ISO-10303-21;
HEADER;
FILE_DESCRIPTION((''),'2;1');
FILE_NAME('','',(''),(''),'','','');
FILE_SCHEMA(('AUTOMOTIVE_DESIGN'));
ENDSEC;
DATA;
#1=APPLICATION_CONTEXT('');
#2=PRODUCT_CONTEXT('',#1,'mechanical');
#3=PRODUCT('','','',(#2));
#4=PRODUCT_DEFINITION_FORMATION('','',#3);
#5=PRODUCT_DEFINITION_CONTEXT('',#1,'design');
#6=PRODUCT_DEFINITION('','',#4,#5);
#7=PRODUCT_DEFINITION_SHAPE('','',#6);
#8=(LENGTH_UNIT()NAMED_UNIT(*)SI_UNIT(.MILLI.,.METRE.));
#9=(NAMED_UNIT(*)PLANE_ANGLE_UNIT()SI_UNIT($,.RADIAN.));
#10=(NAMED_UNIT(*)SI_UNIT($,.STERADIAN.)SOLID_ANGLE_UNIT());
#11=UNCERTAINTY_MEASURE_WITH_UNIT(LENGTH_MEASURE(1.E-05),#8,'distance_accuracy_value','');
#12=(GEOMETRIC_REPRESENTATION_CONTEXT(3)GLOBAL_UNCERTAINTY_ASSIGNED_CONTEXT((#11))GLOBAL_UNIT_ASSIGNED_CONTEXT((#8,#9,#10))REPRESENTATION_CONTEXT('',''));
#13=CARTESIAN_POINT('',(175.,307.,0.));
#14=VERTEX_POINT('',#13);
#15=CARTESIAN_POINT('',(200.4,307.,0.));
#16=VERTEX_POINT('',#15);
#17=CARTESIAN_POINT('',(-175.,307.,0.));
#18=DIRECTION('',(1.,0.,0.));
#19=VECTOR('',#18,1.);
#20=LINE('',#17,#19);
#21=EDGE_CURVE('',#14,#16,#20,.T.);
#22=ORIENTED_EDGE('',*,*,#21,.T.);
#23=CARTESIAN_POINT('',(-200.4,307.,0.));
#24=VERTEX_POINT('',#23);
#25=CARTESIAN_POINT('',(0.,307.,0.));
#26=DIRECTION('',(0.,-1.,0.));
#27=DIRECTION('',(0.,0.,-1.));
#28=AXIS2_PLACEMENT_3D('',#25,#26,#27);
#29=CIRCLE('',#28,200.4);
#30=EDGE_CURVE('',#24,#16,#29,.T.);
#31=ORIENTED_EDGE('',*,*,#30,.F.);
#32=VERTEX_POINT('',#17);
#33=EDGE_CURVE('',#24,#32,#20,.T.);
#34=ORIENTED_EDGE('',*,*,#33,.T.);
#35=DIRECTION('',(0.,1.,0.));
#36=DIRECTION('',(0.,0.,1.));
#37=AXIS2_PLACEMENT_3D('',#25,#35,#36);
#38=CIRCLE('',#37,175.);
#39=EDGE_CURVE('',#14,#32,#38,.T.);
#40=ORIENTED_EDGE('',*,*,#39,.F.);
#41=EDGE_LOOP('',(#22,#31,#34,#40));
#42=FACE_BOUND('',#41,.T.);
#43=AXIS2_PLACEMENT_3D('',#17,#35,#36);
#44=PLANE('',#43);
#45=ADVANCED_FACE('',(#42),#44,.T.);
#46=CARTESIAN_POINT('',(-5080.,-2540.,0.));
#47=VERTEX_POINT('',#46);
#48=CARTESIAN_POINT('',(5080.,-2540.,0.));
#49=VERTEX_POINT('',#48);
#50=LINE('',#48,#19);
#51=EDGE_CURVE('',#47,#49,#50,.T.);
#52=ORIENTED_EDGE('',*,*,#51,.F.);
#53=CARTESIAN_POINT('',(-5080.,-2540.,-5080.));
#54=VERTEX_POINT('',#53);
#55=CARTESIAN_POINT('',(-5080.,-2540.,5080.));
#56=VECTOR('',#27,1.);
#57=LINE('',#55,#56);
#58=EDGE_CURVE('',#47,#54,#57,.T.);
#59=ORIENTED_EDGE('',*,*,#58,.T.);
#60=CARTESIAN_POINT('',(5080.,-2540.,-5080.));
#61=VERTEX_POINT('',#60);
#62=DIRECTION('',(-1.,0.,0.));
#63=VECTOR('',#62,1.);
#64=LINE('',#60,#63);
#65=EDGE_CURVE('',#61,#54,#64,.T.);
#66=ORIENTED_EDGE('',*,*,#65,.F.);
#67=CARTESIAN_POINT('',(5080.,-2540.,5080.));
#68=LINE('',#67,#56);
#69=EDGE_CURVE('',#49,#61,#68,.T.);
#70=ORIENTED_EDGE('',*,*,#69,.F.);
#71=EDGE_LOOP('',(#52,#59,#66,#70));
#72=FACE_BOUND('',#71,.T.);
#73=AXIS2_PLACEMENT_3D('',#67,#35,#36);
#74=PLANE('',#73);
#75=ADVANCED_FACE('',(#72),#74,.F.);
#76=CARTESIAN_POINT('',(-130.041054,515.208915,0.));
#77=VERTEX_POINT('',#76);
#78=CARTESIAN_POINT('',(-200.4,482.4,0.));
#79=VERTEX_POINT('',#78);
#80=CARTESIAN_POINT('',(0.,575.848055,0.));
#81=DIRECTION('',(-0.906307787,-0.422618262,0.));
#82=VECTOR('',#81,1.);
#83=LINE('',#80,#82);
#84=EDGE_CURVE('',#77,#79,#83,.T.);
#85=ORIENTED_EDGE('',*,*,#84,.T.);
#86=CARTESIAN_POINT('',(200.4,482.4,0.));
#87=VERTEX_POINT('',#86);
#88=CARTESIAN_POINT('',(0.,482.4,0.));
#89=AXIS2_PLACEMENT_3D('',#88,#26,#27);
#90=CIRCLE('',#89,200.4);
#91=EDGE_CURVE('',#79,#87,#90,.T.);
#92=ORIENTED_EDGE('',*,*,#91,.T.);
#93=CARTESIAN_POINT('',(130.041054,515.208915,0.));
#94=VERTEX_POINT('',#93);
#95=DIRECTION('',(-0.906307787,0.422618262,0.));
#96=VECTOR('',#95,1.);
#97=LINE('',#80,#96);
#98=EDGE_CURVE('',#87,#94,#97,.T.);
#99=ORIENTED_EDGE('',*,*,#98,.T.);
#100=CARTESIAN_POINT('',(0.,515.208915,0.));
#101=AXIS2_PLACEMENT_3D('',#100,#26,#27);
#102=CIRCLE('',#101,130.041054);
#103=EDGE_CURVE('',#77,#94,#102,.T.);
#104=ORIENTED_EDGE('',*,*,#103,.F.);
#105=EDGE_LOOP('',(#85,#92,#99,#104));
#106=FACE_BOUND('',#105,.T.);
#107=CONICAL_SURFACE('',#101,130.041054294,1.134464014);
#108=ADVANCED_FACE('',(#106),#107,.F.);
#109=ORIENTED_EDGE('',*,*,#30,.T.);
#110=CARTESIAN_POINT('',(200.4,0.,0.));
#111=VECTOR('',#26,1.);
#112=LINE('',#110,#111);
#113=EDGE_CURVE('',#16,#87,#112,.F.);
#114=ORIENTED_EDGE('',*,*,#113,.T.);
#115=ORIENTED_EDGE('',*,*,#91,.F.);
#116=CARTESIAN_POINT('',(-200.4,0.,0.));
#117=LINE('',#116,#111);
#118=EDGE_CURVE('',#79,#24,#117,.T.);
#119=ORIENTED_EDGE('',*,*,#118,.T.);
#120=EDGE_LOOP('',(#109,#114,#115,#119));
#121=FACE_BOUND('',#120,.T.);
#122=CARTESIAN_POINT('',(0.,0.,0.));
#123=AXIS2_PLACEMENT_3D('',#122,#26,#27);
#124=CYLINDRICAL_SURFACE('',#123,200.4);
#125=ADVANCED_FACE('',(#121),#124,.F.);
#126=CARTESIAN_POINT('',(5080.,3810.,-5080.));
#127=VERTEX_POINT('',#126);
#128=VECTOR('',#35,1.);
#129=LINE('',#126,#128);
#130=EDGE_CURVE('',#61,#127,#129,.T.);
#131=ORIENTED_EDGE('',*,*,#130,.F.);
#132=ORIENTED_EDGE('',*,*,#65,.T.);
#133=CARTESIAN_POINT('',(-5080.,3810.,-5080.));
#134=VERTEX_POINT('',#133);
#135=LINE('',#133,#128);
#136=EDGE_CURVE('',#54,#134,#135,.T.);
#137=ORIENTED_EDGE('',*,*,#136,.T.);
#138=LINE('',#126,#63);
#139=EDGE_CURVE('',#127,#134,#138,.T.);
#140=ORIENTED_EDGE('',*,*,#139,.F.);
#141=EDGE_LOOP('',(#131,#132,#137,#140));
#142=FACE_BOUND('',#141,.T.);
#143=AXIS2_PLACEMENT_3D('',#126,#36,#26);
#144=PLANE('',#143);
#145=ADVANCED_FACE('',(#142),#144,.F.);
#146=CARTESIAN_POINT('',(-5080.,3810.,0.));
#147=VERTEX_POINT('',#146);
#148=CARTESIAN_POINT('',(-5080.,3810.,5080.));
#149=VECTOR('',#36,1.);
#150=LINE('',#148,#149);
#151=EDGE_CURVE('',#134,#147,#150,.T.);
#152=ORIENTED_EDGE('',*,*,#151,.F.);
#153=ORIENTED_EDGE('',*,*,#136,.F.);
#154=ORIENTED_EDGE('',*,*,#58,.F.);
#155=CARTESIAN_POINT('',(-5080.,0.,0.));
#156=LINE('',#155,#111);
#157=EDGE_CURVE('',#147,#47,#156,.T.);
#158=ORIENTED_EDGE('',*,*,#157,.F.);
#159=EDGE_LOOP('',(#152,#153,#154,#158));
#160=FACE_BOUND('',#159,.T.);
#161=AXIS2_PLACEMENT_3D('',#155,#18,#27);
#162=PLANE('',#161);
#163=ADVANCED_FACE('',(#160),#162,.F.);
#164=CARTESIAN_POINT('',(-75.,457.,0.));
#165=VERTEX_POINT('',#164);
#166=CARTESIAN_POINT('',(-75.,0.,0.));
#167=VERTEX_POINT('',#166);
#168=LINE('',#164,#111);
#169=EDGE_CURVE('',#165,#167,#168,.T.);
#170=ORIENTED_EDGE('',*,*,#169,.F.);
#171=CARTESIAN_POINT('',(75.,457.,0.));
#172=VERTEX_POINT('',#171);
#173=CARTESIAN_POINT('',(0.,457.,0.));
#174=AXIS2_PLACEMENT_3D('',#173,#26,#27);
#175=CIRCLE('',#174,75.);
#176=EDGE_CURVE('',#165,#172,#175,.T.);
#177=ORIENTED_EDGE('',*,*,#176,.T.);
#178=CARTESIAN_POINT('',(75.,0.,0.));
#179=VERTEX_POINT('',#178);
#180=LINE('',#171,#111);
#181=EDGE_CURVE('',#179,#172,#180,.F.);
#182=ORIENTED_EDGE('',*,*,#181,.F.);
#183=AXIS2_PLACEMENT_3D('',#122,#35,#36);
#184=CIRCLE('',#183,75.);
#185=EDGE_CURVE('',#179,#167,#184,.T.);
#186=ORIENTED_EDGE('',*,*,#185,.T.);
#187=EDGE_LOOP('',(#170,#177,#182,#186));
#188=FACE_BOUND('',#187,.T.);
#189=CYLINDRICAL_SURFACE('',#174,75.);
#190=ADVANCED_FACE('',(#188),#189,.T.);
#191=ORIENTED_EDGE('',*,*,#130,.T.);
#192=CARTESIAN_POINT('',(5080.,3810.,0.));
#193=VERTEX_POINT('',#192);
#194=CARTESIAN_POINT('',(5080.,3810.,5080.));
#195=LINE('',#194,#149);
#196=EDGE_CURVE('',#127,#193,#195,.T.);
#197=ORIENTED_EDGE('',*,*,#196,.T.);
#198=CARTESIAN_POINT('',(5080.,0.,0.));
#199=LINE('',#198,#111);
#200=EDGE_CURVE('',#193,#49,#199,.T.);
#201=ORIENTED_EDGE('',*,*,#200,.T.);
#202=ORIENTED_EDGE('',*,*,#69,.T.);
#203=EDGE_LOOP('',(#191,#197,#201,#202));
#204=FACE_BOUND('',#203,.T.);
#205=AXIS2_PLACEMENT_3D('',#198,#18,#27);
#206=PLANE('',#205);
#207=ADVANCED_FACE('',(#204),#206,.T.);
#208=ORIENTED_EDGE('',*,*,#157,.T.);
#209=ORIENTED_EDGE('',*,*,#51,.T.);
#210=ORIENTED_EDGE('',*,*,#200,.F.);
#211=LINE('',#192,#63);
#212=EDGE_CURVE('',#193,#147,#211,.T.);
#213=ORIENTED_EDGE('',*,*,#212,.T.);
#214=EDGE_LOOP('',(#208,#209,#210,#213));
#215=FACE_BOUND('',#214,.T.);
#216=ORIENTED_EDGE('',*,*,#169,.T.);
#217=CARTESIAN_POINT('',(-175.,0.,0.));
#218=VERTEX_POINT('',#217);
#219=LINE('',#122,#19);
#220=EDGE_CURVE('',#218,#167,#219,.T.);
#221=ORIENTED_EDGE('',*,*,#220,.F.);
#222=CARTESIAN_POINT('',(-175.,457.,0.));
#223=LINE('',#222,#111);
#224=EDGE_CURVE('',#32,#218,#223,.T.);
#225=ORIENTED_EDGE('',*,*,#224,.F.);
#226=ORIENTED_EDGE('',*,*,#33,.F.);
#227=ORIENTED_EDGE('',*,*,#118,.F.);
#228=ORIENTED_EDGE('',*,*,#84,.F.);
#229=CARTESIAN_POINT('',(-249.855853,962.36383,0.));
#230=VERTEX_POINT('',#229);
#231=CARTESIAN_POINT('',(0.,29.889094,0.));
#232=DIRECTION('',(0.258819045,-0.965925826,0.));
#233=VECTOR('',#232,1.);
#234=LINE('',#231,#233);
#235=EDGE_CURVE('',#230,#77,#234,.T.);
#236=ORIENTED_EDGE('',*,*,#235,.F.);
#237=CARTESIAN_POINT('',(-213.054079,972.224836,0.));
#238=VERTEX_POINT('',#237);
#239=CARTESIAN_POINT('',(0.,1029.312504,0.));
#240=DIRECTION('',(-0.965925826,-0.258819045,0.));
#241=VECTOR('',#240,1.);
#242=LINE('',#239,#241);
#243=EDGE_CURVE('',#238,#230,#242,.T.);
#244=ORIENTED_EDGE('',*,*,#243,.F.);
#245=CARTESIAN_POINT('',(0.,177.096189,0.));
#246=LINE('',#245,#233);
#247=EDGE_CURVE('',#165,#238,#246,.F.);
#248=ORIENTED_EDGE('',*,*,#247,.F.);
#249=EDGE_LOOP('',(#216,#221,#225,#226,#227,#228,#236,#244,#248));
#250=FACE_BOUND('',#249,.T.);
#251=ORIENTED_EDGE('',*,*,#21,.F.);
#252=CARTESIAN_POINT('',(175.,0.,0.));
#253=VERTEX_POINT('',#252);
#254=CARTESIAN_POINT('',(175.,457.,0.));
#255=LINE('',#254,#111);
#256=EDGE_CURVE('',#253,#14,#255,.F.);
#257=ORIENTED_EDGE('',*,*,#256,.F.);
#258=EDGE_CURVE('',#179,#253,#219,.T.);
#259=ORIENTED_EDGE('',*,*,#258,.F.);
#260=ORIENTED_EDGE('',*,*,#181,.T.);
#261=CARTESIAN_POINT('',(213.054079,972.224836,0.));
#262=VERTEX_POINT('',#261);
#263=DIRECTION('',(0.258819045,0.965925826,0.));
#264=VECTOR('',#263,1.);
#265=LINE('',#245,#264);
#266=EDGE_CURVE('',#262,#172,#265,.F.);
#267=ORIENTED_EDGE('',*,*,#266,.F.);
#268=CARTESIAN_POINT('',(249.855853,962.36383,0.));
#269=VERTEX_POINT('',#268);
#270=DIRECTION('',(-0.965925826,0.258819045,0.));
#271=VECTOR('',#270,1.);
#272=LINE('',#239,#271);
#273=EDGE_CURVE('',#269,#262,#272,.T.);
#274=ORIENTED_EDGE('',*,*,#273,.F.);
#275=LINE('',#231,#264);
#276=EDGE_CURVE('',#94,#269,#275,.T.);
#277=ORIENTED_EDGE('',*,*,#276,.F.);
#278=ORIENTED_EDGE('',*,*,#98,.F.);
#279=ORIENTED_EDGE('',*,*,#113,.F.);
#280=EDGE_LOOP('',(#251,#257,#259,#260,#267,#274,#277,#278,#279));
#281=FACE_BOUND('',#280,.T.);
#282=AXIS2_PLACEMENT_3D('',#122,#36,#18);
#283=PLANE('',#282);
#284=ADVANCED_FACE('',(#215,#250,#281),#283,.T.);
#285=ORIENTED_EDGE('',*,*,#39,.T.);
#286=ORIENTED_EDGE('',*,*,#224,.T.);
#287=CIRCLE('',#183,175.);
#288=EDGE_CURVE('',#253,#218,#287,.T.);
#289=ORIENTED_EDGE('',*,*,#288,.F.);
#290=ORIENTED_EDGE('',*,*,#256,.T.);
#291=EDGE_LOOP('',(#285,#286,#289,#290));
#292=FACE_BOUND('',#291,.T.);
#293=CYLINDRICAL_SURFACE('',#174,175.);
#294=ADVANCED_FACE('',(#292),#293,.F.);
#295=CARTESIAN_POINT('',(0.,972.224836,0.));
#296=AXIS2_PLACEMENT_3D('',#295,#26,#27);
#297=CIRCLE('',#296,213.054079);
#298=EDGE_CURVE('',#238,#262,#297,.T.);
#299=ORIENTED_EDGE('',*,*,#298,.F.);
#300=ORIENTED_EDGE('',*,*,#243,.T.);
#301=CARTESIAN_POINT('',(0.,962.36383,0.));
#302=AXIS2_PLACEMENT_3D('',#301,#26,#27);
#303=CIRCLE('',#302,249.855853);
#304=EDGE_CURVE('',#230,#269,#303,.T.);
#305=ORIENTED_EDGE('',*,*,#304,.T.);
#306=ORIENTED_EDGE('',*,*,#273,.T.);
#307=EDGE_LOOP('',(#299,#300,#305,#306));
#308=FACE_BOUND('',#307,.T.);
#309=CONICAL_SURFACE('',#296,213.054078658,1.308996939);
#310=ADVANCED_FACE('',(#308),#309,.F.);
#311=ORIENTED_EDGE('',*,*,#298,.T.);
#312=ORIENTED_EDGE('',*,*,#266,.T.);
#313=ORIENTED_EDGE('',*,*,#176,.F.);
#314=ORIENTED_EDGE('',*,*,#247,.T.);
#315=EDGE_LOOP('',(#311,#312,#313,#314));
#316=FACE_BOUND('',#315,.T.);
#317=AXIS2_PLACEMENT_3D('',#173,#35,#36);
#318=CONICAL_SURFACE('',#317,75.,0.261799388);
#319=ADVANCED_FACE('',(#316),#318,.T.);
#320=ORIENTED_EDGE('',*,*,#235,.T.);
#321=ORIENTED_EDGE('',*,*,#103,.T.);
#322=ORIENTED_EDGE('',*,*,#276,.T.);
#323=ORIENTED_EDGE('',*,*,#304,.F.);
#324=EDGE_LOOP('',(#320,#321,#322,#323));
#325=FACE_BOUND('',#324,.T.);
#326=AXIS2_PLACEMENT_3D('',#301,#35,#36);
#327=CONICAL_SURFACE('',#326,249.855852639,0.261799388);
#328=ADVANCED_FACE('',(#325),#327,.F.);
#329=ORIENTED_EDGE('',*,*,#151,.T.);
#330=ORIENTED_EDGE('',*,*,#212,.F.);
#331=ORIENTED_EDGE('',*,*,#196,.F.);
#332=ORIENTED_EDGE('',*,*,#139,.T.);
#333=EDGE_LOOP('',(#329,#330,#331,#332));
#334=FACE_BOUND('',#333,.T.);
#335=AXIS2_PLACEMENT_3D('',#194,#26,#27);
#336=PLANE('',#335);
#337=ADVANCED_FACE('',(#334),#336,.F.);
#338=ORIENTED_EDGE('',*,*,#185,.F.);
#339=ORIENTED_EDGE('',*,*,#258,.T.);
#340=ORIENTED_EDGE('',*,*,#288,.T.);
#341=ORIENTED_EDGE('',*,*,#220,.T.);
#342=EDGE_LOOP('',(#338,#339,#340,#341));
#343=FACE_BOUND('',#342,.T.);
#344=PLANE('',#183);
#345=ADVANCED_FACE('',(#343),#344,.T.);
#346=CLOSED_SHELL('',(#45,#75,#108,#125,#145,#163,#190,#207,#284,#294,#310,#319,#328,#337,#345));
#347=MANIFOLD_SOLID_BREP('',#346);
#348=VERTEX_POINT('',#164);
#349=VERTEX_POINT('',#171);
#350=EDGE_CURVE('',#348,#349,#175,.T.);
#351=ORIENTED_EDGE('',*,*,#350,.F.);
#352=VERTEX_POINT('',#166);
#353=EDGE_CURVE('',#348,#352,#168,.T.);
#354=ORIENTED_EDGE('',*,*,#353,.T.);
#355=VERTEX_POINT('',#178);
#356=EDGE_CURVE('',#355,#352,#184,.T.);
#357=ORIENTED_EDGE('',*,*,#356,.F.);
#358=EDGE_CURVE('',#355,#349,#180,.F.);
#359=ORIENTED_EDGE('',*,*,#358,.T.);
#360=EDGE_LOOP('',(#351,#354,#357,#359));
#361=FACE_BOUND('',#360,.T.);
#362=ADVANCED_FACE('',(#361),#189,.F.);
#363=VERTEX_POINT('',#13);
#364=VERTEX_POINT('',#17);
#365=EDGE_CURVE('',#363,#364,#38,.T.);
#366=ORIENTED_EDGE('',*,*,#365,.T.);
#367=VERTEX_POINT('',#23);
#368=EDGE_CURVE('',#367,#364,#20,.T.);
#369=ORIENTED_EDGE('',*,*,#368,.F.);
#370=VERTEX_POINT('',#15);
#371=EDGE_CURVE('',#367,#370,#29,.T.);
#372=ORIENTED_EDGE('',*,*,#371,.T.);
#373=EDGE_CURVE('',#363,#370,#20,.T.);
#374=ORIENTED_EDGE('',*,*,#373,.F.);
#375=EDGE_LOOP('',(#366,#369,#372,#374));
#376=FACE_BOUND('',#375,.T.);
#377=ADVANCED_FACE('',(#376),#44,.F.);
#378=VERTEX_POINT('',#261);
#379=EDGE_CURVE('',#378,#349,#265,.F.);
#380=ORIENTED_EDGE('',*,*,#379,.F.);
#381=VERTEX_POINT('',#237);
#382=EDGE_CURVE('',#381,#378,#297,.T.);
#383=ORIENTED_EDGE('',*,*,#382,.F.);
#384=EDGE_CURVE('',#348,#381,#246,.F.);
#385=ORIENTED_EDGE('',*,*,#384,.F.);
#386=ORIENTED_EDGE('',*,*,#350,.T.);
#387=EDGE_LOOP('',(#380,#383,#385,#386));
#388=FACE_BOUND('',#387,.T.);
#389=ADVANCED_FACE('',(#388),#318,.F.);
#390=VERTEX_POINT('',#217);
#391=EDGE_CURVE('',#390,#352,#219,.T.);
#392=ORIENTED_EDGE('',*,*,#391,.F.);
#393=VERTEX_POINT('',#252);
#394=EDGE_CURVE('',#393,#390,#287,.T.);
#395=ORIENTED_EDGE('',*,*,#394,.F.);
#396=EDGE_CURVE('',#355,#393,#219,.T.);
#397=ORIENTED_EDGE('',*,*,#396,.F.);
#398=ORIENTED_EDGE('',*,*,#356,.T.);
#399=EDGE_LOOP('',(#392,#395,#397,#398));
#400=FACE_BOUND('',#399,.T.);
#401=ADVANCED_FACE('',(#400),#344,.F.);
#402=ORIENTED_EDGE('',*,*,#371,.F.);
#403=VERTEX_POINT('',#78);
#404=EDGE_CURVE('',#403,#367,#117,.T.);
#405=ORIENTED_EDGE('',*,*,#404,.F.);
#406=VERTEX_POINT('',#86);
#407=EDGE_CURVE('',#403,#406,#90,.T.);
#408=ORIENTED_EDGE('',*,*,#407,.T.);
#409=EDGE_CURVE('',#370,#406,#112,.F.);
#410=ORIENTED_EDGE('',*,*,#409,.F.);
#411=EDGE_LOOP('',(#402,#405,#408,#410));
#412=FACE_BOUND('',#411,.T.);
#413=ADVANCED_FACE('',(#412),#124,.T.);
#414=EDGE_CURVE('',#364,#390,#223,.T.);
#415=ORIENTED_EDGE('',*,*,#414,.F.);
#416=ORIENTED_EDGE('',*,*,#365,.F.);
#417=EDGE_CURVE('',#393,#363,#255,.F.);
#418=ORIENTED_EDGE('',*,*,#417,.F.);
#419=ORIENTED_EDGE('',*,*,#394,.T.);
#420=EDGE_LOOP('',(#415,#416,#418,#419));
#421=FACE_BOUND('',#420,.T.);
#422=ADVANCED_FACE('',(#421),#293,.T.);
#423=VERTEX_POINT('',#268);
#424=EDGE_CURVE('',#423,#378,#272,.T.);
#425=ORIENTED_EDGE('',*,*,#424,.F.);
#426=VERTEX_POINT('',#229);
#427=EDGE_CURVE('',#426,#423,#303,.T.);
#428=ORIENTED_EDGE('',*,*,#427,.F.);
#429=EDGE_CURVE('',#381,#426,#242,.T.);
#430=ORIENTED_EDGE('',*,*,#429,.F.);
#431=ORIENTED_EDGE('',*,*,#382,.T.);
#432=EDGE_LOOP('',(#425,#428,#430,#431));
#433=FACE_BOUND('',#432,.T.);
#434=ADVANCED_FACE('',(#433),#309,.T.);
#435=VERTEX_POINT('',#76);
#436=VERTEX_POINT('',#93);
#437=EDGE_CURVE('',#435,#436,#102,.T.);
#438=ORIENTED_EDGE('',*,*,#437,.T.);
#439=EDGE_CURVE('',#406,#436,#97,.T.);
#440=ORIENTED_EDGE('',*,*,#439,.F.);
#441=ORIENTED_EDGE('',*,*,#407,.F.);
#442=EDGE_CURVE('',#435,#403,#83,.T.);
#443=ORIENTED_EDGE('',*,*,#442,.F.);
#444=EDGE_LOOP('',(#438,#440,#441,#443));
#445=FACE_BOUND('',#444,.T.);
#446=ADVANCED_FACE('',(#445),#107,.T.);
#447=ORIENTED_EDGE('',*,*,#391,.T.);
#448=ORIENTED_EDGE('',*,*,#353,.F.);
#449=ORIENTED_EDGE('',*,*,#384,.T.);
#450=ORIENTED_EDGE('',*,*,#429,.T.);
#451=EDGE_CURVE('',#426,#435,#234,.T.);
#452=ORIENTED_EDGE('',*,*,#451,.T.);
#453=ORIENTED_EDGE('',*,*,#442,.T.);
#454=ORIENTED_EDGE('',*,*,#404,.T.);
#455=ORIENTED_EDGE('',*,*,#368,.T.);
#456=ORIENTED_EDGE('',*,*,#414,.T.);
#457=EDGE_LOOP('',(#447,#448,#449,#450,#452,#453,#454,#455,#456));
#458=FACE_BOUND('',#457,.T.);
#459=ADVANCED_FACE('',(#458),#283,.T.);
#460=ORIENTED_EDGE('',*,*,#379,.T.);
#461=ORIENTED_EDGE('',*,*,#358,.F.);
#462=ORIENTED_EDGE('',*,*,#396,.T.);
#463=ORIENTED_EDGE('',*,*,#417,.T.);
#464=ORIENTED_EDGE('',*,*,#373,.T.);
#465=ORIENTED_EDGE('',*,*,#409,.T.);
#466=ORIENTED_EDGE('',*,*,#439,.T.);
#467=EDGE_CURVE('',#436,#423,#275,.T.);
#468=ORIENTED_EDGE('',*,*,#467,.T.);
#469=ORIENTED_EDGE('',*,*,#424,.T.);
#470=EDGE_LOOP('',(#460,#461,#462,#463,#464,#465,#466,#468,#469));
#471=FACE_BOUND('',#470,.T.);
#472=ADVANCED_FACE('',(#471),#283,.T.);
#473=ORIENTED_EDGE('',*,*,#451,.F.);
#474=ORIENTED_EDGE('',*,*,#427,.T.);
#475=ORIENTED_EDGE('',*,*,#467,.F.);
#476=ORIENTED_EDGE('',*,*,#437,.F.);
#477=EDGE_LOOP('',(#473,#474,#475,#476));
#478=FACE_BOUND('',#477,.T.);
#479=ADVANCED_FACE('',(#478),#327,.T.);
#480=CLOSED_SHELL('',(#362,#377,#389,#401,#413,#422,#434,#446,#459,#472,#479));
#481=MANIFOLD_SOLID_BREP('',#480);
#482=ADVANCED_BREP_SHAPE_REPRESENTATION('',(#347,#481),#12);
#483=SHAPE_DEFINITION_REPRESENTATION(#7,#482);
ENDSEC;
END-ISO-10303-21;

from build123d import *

# Parameters (mm, degrees)
SKETCH1_R           = 175
SKETCH1_R_2         = 75
BOSS_EXTRUDE1_DEPTH = 457
SKETCH3_W           = 10160
SKETCH3_H           = 6350
BOSS_EXTRUDE2_DEPTH = 5080
SKETCH4_W           = 13475.768327993
SKETCH4_H           = 8367.586519284
CUT_EXTRUDE1_DEPTH  = 8132.96778154


# Read off the part's stored shape, not the designer's step: Intersect1
with BuildPart() as part:
    # Sketch1 → Boss-Extrude1 (new body)
    with BuildSketch(Plane(origin=(0, 0, 0), x_dir=(1, 0, 0), z_dir=(0, 1, 0))):
        with Locations(Location((0, 0, 0), (0, 0, 270))):
            Circle(SKETCH1_R)
        with Locations(Location((0, 0, 0), (0, 0, 270))):
            Circle(SKETCH1_R_2, mode=Mode.SUBTRACT)
    extrude(amount=BOSS_EXTRUDE1_DEPTH)

    # Sketch2 → Revolve1 (revolve)
    with BuildSketch(Plane.XY, mode=Mode.PRIVATE) as revolve1_sk:
        Polygon((-175, 307), (-200.4, 307), (-200.4, 482.4), (-130.041054294, 515.208915202), (-249.855852639, 962.363830124), (-213.054078658, 972.224835743), (-94.722011237, 530.603547963), (-75, 457), (-175, 457), align=None)
    revolve(revolve1_sk.sketch.rotate(Axis((0, 0, 0), (0, 1, 0)), 270), axis=Axis((0, 0, 0), (0, 1, 0)))


with BuildPart() as body_2:
    # Sketch3 → Boss-Extrude2 (new, symmetric)
    with BuildSketch(Plane(origin=(0, 0, 0), x_dir=(0, 0, -1), z_dir=(1, 0, 0))):
        with Locations((0, 635)):
            Rectangle(SKETCH3_W, SKETCH3_H)
    extrude(amount=BOSS_EXTRUDE2_DEPTH, both=True)

    # Intersect1 outline → Intersect1 (revolve, cut)
    with BuildSketch(Plane.XY):
        Polygon((75, 457), (75, 0), (175, 0), (175, 307), (200.4, 307), (200.4, 482.4), (130.041054294, 515.208915202), (249.855852639, 962.363830124), (213.054078658, 972.224835743), align=None)
    revolve(axis=Axis((0, 0, 0), (0, 1, 0)), mode=Mode.SUBTRACT)


with BuildPart() as cut_extrude1_tool:
    # Sketch4 → Cut-Extrude1 (new, through all)
    with BuildSketch(Plane.XY):
        with Locations((454.179344916, 464.014834855)):
            Rectangle(SKETCH4_W, SKETCH4_H)
    extrude(amount=CUT_EXTRUDE1_DEPTH)


with BuildPart() as part_1:
    add(part.part)

    # Cut-Extrude1: cut by cut_extrude1_tool
    add(cut_extrude1_tool.part, mode=Mode.SUBTRACT)


with BuildPart() as body_2_1:
    add(body_2.part)

    # Cut-Extrude1: cut by cut_extrude1_tool
    add(cut_extrude1_tool.part, mode=Mode.SUBTRACT)


solid = Compound([part_1.part, body_2_1.part])
